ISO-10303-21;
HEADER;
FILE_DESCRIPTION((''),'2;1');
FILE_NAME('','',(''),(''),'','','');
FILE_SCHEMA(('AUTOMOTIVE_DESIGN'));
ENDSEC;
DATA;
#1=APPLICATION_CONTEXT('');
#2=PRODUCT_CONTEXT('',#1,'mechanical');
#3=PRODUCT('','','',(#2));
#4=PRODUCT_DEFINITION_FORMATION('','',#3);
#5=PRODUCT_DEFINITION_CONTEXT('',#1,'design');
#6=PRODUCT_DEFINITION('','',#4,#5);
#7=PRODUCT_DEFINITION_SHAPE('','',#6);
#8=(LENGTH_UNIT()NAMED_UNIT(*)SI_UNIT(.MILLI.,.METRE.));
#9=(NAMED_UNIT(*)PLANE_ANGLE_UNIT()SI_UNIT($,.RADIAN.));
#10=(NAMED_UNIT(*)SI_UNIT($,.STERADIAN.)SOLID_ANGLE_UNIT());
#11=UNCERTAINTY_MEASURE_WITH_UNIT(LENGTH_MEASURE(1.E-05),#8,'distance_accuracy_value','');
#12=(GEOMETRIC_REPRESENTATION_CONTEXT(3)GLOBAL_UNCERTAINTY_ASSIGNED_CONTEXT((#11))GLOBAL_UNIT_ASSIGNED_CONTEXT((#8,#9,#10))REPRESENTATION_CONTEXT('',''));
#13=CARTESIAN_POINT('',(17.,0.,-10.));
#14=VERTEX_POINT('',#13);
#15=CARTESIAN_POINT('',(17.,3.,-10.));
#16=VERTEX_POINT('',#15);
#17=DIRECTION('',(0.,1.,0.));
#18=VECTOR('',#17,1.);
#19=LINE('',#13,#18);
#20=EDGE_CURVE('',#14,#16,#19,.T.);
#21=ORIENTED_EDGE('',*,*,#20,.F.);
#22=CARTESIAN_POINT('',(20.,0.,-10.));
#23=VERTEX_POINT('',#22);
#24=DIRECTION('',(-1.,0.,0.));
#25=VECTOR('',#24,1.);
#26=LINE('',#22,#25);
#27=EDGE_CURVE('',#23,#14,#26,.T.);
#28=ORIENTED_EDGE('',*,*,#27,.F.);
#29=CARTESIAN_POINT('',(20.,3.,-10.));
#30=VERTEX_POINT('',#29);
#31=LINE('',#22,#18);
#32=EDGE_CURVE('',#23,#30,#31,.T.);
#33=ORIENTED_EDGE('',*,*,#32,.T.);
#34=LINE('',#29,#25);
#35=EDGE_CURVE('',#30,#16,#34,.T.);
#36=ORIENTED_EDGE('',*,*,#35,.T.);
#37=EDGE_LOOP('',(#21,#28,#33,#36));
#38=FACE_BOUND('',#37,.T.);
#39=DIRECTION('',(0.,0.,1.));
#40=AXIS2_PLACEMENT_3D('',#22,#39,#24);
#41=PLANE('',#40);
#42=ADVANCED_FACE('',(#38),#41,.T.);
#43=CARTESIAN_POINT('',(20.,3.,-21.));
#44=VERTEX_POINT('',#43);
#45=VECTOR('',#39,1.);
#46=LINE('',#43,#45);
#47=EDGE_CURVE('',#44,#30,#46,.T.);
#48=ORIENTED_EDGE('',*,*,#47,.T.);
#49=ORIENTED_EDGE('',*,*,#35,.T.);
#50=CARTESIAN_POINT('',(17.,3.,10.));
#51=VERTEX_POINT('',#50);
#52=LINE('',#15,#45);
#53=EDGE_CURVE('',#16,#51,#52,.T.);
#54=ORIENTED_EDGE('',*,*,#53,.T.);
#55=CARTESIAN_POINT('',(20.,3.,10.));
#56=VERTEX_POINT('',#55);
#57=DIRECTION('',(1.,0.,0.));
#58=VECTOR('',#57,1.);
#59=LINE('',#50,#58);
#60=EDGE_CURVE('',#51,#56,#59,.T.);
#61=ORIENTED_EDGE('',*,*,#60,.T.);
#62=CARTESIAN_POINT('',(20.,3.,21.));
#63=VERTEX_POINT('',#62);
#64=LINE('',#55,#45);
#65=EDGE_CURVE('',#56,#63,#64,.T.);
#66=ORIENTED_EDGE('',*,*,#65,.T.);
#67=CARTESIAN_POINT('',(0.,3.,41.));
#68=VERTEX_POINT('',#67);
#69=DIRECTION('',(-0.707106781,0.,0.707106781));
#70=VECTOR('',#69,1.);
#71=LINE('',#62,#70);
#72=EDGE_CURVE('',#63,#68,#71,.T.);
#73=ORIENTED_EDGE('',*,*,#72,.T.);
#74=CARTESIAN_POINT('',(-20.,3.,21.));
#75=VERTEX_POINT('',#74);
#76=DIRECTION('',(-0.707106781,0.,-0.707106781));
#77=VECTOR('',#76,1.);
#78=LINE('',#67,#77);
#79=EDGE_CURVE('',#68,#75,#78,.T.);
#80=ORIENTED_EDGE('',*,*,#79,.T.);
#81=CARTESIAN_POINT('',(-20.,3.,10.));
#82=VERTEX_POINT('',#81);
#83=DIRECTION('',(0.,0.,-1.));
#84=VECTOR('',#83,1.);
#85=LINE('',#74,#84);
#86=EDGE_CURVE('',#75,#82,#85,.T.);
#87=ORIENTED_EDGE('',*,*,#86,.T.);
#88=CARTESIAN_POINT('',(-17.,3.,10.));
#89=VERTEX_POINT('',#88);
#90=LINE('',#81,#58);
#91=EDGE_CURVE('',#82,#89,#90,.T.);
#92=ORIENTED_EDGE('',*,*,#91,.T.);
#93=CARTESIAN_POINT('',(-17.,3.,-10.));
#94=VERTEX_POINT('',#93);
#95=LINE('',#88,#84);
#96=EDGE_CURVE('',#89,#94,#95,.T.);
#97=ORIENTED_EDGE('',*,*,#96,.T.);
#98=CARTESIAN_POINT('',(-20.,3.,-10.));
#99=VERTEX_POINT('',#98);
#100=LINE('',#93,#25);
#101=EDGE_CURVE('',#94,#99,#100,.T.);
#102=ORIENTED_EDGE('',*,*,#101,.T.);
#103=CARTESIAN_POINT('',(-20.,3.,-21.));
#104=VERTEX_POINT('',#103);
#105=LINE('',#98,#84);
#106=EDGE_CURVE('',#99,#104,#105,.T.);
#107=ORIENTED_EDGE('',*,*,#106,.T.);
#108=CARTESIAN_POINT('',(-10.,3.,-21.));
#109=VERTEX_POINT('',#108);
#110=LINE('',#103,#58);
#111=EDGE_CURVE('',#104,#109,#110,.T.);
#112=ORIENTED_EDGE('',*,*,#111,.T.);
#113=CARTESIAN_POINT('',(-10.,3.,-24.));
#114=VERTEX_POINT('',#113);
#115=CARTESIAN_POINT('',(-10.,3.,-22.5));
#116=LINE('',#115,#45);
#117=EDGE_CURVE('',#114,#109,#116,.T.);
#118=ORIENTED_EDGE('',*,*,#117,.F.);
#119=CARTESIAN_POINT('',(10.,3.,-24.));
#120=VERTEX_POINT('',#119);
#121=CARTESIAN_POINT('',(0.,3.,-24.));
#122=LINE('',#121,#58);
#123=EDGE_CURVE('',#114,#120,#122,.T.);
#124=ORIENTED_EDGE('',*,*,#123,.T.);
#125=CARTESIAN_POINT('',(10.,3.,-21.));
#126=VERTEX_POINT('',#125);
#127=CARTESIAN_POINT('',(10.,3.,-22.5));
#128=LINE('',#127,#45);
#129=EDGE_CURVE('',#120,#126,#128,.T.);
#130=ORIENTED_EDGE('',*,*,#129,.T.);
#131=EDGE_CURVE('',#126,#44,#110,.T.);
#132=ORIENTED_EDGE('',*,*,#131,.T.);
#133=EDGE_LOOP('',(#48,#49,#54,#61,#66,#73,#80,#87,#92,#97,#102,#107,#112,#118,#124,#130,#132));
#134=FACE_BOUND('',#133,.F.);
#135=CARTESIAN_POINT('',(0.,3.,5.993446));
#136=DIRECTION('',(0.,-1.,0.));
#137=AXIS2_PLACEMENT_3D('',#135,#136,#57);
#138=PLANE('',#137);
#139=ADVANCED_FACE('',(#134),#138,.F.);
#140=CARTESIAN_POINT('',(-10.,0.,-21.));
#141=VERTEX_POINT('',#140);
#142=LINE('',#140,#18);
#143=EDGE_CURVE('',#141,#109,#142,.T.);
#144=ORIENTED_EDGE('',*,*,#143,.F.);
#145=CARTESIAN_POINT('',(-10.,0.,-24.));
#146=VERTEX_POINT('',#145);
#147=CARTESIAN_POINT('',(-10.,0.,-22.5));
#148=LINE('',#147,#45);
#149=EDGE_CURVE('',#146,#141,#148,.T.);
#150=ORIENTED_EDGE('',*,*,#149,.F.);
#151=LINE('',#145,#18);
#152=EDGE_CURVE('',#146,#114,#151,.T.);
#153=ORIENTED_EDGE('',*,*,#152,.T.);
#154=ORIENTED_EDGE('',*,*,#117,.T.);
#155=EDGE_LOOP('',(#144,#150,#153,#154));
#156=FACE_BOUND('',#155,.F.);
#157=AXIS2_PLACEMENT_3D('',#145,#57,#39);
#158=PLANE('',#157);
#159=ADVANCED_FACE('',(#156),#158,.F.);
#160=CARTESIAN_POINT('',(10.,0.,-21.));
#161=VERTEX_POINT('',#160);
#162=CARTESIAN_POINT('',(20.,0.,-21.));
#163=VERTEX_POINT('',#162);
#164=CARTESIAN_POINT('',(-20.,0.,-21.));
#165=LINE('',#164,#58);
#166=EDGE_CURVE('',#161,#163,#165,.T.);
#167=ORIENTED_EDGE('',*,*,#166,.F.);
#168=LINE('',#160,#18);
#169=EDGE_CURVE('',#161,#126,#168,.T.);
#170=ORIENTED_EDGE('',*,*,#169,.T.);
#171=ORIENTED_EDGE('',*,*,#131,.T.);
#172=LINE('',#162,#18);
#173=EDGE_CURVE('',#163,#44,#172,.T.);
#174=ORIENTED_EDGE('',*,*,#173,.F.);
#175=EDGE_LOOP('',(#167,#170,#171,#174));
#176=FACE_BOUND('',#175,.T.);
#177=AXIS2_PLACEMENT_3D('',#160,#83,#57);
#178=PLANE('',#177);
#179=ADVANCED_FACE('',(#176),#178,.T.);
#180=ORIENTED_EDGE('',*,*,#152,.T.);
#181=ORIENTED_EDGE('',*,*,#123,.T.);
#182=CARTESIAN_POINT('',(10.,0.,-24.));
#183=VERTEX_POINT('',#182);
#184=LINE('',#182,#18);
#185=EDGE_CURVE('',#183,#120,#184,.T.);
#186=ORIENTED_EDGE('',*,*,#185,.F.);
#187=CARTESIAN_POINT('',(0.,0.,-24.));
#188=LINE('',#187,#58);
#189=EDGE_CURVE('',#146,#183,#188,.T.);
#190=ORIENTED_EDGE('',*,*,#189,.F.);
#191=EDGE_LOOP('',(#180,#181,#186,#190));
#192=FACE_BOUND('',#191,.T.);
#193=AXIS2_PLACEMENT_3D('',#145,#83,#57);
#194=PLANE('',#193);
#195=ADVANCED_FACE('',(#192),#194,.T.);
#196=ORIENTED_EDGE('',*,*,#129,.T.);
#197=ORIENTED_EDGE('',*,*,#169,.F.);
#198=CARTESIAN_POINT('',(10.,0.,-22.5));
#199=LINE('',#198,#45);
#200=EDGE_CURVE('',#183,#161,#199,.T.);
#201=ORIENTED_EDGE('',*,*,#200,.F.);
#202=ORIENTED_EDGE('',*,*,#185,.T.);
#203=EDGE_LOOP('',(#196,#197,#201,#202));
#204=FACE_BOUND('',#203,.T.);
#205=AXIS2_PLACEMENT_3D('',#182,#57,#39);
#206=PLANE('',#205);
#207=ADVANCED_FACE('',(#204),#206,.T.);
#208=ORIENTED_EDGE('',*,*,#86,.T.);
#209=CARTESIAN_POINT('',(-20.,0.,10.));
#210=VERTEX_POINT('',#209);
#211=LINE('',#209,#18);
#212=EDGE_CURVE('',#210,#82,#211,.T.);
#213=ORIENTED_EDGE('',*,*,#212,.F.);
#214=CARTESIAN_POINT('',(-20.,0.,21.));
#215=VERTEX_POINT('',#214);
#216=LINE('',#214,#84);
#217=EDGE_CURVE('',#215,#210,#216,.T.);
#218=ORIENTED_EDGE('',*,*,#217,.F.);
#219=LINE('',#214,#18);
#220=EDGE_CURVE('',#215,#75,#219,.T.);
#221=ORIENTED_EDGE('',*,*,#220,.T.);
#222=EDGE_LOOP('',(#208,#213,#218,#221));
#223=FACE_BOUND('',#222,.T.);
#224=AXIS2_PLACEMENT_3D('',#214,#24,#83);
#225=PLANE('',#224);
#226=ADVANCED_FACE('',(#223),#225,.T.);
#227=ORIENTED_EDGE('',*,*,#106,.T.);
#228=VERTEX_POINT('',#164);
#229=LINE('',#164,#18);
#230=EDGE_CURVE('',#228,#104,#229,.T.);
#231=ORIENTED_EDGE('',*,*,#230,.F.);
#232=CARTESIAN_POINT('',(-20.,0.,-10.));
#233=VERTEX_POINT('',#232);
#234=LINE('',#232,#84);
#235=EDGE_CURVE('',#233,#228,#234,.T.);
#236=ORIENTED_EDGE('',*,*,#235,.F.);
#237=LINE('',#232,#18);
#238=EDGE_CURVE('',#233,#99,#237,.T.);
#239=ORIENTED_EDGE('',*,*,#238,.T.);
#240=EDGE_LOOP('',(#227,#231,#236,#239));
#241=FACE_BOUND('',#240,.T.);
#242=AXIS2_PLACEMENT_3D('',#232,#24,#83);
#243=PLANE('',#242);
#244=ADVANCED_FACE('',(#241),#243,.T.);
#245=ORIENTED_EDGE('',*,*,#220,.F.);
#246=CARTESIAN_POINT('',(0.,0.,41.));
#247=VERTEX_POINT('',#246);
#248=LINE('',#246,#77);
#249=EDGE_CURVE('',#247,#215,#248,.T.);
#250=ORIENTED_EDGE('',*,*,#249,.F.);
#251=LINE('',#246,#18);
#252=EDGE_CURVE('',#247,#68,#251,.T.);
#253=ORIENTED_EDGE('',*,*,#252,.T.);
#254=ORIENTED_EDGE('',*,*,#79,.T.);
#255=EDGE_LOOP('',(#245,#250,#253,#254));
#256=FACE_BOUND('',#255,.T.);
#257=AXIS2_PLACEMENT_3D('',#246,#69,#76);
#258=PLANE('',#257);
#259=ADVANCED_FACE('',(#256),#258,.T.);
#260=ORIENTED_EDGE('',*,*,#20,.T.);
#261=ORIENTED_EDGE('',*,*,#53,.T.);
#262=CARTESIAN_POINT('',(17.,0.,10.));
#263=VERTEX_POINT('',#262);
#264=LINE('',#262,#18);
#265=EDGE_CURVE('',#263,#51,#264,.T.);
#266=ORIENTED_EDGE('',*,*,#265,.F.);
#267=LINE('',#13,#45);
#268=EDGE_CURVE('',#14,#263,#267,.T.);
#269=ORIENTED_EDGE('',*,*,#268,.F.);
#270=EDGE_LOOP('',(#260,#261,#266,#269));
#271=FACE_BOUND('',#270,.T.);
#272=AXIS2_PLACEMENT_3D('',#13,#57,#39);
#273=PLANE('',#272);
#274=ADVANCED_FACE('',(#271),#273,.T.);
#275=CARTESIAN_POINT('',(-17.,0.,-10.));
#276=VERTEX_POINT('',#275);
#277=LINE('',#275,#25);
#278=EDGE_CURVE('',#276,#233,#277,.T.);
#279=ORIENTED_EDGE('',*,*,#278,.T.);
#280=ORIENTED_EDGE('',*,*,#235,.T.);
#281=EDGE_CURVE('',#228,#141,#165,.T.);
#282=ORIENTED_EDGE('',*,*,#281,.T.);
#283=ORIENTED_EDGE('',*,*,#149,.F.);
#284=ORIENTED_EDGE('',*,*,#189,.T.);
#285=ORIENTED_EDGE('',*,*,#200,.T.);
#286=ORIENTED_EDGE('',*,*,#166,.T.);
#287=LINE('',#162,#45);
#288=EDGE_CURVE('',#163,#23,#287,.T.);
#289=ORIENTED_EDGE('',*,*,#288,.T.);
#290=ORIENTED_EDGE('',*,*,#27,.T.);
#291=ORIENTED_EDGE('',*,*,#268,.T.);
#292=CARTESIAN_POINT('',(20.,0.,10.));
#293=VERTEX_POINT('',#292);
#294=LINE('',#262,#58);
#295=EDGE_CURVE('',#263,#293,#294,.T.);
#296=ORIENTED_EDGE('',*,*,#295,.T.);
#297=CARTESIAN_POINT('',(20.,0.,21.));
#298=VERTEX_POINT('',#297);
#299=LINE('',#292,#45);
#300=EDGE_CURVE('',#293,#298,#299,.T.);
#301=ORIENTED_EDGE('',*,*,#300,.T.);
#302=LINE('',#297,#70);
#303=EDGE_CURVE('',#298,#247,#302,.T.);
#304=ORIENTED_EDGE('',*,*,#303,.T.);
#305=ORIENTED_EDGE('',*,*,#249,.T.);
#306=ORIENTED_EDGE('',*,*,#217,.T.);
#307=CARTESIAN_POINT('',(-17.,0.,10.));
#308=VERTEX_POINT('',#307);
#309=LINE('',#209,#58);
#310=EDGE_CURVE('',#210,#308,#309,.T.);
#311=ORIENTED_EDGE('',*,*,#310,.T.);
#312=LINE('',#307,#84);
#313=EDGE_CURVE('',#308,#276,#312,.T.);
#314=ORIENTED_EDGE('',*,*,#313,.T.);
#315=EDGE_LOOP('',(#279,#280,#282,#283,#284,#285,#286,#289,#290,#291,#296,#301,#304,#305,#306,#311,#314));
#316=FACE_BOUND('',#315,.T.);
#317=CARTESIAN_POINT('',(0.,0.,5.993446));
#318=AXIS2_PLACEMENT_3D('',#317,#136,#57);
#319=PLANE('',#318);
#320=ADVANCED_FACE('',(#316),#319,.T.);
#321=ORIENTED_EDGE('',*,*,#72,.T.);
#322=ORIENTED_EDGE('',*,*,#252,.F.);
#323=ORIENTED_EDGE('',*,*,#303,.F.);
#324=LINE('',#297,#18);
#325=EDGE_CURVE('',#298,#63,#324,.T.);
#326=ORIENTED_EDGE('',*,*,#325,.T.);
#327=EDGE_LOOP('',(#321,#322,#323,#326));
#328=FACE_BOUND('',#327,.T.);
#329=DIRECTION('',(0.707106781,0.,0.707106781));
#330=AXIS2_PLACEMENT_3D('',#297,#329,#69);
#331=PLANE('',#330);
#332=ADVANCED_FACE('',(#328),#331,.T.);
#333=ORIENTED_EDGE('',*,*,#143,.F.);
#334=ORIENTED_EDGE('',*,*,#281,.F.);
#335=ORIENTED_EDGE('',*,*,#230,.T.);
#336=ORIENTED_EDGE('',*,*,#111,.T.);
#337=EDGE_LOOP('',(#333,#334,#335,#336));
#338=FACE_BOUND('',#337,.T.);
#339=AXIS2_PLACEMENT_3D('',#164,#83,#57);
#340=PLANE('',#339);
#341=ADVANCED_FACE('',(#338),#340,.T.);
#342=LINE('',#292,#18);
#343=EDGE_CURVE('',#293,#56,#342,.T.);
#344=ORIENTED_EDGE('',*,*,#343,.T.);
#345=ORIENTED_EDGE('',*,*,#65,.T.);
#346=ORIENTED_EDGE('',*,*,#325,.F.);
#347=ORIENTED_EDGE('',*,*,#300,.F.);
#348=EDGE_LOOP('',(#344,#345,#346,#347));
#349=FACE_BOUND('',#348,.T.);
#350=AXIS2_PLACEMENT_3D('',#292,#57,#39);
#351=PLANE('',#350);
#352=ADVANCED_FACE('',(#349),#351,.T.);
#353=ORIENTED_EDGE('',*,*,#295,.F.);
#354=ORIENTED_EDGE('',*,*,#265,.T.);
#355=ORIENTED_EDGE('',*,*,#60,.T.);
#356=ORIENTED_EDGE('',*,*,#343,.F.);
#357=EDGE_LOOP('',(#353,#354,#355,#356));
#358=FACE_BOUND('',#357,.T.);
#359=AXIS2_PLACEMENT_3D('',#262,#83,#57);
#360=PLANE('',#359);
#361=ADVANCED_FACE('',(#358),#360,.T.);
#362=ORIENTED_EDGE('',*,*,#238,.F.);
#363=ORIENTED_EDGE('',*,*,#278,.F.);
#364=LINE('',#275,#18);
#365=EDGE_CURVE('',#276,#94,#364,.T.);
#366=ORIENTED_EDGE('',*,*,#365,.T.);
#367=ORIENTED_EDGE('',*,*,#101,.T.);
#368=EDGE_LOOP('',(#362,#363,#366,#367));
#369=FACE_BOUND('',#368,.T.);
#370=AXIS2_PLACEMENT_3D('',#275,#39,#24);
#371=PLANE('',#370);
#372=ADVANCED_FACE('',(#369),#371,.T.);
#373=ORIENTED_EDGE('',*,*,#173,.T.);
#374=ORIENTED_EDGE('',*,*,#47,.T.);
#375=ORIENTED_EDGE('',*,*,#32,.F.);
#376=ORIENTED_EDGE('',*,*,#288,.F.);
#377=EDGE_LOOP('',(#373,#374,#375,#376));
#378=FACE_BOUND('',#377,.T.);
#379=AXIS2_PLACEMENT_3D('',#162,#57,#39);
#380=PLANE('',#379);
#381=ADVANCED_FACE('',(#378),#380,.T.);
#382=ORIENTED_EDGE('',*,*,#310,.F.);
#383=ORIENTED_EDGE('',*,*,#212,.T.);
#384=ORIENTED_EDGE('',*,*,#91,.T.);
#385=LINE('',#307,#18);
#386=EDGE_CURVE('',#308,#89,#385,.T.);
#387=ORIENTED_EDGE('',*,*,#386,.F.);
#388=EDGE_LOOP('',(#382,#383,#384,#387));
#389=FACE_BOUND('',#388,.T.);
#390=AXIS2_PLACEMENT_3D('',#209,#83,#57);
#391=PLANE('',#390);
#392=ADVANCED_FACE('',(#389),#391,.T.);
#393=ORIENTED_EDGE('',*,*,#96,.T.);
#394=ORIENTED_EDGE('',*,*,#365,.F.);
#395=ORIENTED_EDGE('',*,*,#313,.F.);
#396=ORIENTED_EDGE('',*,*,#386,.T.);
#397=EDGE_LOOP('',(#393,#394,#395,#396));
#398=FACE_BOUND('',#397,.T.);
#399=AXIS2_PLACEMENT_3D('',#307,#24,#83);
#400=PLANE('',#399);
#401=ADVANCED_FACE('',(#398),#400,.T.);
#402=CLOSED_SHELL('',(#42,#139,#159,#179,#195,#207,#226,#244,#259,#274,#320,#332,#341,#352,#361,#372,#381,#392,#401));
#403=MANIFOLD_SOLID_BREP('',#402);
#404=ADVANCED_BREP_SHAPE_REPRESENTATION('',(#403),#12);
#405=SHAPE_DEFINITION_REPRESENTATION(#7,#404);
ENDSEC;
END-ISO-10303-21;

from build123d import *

# Parameters (mm, degrees)
F0_W     = 20
F0_H     = 40
F0_H_2   = 3
F1_DEPTH = 3


# Not quite as in the source:
# - a feature names something its author has since deleted; it is built from what else it names


with BuildPart() as f1:
    # F0 (on Front) → F1 (new body)
    with BuildSketch(Plane.XZ):
        Polygon((10, -21), (20, -21), (20, -10), (17, -10), (17, 10), (20, 10), (20, 21), (0, 41), (-20, 21), (-20, 10), (-17, 10), (-17, -10), (-20, -10), (-20, -21), (-10, -21), (-10, 19), (10, 19), align=None)
        with Locations((0, -1)):
            Rectangle(F0_W, F0_H)
        with Locations((0, -22.5)):
            Rectangle(F0_W, F0_H_2)
    extrude(amount=-F1_DEPTH)


solid = f1.part
